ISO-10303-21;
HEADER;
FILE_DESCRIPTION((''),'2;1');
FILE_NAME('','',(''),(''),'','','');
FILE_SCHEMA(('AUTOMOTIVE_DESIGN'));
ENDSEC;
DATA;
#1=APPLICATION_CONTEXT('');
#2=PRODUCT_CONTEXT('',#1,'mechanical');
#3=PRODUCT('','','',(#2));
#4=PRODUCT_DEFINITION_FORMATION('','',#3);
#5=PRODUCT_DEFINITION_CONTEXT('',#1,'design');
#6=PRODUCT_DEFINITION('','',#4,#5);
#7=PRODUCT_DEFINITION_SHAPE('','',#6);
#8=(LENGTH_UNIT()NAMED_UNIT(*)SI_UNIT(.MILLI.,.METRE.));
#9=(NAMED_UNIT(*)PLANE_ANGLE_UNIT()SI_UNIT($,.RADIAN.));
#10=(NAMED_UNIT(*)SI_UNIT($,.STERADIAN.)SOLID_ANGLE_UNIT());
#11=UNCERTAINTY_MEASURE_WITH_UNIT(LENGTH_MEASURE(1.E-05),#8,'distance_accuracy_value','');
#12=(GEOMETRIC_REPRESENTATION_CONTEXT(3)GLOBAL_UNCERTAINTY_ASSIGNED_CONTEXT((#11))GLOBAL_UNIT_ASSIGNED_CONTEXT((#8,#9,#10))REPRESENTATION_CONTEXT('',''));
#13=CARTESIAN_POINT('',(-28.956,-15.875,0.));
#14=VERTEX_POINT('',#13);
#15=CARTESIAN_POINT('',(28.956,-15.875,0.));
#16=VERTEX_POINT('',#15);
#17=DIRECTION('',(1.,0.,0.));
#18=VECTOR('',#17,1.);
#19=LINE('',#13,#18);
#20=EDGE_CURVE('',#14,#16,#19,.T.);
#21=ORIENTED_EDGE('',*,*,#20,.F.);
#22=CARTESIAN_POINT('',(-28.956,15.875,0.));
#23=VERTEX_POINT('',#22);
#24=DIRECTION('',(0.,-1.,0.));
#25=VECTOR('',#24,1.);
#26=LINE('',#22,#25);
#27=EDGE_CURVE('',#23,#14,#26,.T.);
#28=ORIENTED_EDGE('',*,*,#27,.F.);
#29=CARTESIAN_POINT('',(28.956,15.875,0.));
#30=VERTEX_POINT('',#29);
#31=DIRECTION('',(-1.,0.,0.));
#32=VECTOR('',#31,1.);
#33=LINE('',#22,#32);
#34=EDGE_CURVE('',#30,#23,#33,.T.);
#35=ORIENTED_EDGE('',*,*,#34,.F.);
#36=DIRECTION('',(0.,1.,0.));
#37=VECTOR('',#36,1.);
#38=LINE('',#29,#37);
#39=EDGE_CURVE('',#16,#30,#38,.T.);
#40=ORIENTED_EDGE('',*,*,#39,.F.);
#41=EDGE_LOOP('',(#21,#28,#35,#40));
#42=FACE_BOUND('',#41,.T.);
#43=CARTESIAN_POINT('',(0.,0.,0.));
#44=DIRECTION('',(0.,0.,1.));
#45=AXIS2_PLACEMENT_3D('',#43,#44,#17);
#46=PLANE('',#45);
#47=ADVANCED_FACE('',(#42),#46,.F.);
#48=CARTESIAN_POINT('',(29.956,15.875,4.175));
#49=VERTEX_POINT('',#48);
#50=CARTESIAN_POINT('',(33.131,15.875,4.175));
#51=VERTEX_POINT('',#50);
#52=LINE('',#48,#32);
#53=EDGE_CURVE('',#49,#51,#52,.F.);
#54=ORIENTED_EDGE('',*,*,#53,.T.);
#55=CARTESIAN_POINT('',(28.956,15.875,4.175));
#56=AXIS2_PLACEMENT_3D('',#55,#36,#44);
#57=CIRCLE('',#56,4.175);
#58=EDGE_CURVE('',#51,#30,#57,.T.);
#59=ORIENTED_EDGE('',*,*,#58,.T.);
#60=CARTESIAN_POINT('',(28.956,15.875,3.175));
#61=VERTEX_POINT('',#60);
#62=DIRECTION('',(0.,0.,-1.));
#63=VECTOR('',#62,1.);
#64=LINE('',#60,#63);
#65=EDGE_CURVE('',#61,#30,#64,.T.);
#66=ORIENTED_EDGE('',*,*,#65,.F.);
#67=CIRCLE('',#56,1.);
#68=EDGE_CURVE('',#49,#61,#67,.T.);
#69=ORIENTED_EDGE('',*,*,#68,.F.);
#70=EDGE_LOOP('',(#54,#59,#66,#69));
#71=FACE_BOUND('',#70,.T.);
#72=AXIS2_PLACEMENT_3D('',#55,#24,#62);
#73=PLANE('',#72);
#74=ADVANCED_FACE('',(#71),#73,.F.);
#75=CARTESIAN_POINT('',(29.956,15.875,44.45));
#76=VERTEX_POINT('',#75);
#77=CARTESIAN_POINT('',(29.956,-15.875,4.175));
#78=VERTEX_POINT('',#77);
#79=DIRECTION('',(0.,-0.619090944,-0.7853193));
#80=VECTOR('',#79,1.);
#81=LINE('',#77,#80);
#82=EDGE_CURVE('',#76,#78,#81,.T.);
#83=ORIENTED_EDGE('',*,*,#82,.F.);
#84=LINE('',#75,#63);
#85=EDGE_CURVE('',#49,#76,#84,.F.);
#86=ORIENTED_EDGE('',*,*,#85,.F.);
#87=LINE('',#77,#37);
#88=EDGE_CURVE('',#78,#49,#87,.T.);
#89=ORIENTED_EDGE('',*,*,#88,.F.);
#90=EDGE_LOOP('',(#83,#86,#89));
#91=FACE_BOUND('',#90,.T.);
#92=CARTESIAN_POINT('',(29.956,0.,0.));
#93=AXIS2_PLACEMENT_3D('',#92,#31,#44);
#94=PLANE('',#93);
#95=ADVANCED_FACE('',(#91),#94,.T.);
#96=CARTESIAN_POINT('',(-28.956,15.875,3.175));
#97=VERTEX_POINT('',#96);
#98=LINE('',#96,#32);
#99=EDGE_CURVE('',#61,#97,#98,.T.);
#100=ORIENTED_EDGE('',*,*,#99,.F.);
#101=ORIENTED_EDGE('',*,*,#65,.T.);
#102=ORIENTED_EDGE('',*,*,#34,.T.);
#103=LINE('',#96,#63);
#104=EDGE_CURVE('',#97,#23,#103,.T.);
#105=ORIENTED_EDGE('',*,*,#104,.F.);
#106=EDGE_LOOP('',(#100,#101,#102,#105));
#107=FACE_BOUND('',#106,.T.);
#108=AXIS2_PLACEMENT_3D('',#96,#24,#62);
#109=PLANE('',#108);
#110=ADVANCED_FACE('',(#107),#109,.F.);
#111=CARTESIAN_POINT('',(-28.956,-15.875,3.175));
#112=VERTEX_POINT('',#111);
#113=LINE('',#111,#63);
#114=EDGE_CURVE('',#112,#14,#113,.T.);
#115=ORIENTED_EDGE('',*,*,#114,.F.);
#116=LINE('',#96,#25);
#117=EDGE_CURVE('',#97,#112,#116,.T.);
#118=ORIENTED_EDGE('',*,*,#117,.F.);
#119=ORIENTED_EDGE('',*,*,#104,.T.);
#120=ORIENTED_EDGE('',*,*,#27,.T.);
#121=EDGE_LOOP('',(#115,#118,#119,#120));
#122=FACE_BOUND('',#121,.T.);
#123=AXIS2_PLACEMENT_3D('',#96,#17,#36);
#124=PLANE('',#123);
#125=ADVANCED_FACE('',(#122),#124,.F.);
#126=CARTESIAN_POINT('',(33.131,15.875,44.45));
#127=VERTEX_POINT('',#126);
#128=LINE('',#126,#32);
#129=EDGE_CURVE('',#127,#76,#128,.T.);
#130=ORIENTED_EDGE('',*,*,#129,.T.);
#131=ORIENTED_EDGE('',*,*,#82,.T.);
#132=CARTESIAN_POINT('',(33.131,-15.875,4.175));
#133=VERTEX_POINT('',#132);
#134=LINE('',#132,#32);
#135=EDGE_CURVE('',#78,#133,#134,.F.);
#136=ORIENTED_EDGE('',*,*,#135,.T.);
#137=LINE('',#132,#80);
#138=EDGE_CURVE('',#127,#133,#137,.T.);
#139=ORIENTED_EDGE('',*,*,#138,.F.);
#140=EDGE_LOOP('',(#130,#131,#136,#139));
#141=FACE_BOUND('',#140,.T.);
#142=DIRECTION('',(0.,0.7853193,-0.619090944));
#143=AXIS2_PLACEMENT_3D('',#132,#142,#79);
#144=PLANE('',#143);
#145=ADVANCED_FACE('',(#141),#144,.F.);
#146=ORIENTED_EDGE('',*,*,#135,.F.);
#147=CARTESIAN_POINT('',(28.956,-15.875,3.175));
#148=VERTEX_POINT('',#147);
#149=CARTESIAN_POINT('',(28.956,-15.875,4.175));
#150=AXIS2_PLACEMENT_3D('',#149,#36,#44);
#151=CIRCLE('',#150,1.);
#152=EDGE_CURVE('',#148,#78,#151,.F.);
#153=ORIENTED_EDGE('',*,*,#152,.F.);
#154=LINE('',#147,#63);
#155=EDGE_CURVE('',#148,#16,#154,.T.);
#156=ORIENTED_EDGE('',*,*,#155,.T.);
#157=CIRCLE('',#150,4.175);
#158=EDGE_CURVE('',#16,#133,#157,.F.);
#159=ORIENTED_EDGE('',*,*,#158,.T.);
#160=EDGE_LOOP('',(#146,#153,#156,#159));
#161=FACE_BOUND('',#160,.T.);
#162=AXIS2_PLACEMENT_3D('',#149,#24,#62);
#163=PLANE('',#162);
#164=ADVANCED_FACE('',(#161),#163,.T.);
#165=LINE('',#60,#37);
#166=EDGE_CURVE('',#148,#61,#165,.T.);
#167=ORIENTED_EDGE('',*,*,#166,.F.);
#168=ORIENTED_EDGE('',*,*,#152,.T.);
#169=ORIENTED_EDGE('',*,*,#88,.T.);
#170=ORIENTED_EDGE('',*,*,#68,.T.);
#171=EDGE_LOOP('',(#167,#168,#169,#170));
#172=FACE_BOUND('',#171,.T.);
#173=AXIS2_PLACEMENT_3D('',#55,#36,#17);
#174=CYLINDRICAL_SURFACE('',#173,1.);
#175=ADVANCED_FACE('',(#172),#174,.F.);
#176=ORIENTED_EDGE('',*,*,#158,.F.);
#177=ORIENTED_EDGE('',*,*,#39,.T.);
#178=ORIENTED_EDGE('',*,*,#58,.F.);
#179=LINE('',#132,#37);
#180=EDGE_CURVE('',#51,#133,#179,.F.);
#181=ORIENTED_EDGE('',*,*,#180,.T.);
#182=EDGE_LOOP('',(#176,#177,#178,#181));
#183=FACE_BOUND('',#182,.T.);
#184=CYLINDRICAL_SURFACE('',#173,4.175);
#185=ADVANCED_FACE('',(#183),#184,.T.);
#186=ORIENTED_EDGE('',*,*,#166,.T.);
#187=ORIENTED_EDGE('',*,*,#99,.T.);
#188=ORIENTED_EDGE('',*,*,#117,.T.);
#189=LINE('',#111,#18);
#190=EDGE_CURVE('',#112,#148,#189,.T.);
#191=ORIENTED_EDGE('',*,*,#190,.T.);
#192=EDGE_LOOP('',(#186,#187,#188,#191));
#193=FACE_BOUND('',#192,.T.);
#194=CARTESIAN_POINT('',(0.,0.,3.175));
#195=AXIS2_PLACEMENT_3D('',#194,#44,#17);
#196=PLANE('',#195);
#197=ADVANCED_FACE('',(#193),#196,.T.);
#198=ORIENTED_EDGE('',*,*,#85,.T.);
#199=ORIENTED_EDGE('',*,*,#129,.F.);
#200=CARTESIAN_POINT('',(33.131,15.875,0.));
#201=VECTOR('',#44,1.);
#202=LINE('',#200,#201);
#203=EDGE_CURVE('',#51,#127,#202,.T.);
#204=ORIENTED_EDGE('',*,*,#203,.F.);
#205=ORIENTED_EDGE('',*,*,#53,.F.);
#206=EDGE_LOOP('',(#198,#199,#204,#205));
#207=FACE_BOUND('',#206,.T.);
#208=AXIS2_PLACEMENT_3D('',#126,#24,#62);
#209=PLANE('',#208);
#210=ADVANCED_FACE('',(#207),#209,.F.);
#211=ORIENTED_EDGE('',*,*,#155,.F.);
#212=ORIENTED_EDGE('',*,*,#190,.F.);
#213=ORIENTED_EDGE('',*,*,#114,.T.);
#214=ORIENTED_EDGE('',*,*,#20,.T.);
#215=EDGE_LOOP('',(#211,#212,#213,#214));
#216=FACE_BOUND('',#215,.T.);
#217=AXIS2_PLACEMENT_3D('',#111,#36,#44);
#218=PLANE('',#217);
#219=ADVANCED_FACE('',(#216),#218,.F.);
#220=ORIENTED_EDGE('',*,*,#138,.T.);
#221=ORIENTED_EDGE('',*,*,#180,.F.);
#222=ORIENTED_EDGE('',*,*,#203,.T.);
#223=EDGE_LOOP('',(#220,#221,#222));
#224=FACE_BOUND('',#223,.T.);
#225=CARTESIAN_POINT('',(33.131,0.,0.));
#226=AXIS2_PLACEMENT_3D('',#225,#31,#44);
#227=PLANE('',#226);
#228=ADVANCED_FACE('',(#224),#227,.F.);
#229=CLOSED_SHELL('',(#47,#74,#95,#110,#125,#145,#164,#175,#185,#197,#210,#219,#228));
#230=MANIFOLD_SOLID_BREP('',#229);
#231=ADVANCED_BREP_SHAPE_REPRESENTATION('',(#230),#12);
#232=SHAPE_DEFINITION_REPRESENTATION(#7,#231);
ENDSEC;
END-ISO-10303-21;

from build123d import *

# Parameters (mm, degrees)
SKETCH2_W               = 57.912
SKETCH2_H               = 31.75
BASE_FLANGE1_DEPTH      = 3.175
EDGE_FLANGE1_DEPTH      = 31.75
CUT_EXTRUDE2_DEPTH      = 78.991112917
CUT_EXTRUDE2_DEPTH_BACK = 3.175


# Sheet-metal steps are written as plain solids
with BuildPart() as part:
    # Sketch2 → Base-Flange1 (new body)
    with BuildSketch(Plane.XY):
        Rectangle(SKETCH2_W, SKETCH2_H)
    extrude(amount=BASE_FLANGE1_DEPTH)

    # Edge-Flange1 section (across the edge) → Edge-Flange1 (add)
    with BuildSketch(Plane(origin=(29.956, -15.875, 3.175), x_dir=(-1, 0, 0), z_dir=(0, 1, 0))):
        with BuildLine():
            Line((-3.175, 1), (-3.175, 41.275))
            Line((-3.175, 41.275), (0, 41.275))
            Line((0, 41.275), (0, 1))
            ThreePointArc((0, 1), (0.292893219, 0.292893219), (1, 0))
            Line((1, 0), (1, -3.175))
            ThreePointArc((1, -3.175), (-1.952170811, -1.952170811), (-3.175, 1))
        make_face()
    extrude(amount=EDGE_FLANGE1_DEPTH)

    # Sketch11 → Cut-Extrude2 (cut, two sides: drawn at the far end of the back side and taken through both)
    with BuildSketch(Plane(origin=(33.131, 0, 0), x_dir=(0, 0, -1), z_dir=(1, 0, 0)).offset(-CUT_EXTRUDE2_DEPTH_BACK)):
        Polygon((89.473958122, -89.701304665), (-4.175, -15.875), (-44.45, 15.875), (-138.098958122, 89.701304665), (-285.751567452, -97.596611579), (-58.178651208, -276.999220909), align=None)
    extrude(amount=CUT_EXTRUDE2_DEPTH + CUT_EXTRUDE2_DEPTH_BACK, mode=Mode.SUBTRACT)


solid = part.part
